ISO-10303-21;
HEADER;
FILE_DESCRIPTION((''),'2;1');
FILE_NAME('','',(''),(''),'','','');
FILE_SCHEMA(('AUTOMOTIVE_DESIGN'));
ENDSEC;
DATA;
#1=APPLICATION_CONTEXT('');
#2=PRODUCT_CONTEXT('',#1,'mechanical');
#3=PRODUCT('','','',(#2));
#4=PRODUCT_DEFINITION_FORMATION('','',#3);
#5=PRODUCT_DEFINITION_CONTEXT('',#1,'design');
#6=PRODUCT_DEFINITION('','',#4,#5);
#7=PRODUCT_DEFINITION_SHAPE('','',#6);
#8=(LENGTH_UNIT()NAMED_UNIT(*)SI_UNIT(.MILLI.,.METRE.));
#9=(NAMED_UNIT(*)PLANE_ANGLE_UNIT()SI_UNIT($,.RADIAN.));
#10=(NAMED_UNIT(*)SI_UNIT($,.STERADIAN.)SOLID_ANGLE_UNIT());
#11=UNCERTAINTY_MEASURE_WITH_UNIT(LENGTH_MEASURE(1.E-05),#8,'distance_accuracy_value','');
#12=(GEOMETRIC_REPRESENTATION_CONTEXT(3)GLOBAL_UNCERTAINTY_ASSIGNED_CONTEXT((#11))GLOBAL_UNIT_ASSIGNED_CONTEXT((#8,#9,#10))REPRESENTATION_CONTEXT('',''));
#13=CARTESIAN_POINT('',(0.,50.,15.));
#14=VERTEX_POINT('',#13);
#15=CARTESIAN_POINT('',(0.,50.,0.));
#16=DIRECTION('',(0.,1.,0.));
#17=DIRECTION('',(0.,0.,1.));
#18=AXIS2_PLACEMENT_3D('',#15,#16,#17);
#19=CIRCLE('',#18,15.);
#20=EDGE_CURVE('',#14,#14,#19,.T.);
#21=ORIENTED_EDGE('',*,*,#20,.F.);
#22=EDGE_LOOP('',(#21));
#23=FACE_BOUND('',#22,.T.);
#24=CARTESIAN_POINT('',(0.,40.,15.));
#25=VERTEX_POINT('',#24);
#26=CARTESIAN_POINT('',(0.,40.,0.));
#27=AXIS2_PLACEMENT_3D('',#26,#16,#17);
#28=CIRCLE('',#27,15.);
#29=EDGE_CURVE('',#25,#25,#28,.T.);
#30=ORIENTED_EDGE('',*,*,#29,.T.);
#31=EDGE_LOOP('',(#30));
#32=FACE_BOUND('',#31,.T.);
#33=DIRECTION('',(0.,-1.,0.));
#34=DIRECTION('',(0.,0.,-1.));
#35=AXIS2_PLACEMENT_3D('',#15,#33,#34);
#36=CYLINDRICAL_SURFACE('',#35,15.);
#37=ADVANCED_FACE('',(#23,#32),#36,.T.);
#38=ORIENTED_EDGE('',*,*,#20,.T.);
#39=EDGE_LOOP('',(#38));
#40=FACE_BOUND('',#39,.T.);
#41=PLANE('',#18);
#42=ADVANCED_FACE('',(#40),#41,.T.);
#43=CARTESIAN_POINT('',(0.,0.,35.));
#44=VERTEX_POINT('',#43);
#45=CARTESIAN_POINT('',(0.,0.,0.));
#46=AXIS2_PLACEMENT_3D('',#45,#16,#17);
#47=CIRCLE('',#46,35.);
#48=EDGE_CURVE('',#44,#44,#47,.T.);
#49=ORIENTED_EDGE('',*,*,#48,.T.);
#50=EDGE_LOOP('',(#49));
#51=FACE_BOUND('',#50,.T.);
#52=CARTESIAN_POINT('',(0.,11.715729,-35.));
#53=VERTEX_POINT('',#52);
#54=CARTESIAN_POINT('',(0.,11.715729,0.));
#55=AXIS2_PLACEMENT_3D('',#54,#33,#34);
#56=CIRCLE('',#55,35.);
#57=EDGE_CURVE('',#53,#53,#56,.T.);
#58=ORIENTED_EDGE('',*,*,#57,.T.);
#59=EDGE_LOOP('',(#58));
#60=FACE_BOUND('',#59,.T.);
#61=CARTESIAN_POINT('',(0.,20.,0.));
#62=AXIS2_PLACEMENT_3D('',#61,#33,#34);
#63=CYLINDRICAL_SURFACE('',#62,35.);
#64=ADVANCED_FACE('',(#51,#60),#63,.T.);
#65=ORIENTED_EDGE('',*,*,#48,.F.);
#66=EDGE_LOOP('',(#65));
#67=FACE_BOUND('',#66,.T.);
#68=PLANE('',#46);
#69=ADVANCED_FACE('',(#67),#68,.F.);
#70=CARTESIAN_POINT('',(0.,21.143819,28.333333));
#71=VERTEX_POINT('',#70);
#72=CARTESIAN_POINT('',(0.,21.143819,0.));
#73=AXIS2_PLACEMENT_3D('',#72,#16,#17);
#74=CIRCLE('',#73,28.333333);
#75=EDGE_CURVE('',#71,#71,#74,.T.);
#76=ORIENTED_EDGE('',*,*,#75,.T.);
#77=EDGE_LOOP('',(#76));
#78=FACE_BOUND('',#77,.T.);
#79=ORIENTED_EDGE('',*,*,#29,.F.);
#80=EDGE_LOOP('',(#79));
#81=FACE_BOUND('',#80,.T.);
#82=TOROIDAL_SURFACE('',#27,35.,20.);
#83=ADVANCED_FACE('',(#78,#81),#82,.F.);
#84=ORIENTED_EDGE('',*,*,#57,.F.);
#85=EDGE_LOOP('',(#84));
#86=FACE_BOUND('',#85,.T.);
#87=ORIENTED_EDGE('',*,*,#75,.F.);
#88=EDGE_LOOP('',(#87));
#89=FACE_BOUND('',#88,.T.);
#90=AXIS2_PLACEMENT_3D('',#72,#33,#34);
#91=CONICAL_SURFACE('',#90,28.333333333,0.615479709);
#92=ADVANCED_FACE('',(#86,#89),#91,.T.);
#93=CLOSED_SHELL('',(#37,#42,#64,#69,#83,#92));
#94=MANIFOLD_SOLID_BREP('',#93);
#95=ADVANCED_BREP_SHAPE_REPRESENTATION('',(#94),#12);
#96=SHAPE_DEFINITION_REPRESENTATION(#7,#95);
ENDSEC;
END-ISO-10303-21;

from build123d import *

# Parameters (mm, degrees)
SCHIZZO1_R                   = 35
ESTRUSIONE_ESTRUSIONE1_DEPTH = 20
SCHIZZO2_R                   = 15
ESTRUSIONE_ESTRUSIONE2_DEPTH = 30
RACCORDO1_R                  = 20


with BuildPart() as part:
    # Schizzo1 → Estrusione-Estrusione1 (new body)
    with BuildSketch(Plane(origin=(0, 0, 0), x_dir=(1, 0, 0), z_dir=(0, 1, 0))):
        with Locations(Location((0, 0, 0), (0, 0, 270))):
            Circle(SCHIZZO1_R)
    extrude(amount=ESTRUSIONE_ESTRUSIONE1_DEPTH)

    # Schizzo2 → Estrusione-Estrusione2 (add)
    with BuildSketch(Plane(origin=(0, 20, 0), x_dir=(1, 0, 0), z_dir=(0, 1, 0))):
        with Locations(Location((0, 0, 0), (0, 0, 270))):
            Circle(SCHIZZO2_R)
    extrude(amount=ESTRUSIONE_ESTRUSIONE2_DEPTH)

    # Raccordo1
    raccordo1_edges = [part.edges().sort_by_distance(p)[0] for p in [
        (0, 20, -15),
    ]]
    fillet(raccordo1_edges, radius=RACCORDO1_R - 0.0001)  # a hair under: the kernel refuses the full size

    # Smusso1: read off the stored shape, not the designer's step
    # Smusso1 outline → Smusso1 (revolve, cut)
    with BuildSketch(Plane.XY):
        Polygon((35, 21.143819168), (28.333333333, 21.143819168), (35, 11.715728753), align=None)
    revolve(axis=Axis((0, 0, 0), (0, 1, 0)), mode=Mode.SUBTRACT)


solid = part.part
